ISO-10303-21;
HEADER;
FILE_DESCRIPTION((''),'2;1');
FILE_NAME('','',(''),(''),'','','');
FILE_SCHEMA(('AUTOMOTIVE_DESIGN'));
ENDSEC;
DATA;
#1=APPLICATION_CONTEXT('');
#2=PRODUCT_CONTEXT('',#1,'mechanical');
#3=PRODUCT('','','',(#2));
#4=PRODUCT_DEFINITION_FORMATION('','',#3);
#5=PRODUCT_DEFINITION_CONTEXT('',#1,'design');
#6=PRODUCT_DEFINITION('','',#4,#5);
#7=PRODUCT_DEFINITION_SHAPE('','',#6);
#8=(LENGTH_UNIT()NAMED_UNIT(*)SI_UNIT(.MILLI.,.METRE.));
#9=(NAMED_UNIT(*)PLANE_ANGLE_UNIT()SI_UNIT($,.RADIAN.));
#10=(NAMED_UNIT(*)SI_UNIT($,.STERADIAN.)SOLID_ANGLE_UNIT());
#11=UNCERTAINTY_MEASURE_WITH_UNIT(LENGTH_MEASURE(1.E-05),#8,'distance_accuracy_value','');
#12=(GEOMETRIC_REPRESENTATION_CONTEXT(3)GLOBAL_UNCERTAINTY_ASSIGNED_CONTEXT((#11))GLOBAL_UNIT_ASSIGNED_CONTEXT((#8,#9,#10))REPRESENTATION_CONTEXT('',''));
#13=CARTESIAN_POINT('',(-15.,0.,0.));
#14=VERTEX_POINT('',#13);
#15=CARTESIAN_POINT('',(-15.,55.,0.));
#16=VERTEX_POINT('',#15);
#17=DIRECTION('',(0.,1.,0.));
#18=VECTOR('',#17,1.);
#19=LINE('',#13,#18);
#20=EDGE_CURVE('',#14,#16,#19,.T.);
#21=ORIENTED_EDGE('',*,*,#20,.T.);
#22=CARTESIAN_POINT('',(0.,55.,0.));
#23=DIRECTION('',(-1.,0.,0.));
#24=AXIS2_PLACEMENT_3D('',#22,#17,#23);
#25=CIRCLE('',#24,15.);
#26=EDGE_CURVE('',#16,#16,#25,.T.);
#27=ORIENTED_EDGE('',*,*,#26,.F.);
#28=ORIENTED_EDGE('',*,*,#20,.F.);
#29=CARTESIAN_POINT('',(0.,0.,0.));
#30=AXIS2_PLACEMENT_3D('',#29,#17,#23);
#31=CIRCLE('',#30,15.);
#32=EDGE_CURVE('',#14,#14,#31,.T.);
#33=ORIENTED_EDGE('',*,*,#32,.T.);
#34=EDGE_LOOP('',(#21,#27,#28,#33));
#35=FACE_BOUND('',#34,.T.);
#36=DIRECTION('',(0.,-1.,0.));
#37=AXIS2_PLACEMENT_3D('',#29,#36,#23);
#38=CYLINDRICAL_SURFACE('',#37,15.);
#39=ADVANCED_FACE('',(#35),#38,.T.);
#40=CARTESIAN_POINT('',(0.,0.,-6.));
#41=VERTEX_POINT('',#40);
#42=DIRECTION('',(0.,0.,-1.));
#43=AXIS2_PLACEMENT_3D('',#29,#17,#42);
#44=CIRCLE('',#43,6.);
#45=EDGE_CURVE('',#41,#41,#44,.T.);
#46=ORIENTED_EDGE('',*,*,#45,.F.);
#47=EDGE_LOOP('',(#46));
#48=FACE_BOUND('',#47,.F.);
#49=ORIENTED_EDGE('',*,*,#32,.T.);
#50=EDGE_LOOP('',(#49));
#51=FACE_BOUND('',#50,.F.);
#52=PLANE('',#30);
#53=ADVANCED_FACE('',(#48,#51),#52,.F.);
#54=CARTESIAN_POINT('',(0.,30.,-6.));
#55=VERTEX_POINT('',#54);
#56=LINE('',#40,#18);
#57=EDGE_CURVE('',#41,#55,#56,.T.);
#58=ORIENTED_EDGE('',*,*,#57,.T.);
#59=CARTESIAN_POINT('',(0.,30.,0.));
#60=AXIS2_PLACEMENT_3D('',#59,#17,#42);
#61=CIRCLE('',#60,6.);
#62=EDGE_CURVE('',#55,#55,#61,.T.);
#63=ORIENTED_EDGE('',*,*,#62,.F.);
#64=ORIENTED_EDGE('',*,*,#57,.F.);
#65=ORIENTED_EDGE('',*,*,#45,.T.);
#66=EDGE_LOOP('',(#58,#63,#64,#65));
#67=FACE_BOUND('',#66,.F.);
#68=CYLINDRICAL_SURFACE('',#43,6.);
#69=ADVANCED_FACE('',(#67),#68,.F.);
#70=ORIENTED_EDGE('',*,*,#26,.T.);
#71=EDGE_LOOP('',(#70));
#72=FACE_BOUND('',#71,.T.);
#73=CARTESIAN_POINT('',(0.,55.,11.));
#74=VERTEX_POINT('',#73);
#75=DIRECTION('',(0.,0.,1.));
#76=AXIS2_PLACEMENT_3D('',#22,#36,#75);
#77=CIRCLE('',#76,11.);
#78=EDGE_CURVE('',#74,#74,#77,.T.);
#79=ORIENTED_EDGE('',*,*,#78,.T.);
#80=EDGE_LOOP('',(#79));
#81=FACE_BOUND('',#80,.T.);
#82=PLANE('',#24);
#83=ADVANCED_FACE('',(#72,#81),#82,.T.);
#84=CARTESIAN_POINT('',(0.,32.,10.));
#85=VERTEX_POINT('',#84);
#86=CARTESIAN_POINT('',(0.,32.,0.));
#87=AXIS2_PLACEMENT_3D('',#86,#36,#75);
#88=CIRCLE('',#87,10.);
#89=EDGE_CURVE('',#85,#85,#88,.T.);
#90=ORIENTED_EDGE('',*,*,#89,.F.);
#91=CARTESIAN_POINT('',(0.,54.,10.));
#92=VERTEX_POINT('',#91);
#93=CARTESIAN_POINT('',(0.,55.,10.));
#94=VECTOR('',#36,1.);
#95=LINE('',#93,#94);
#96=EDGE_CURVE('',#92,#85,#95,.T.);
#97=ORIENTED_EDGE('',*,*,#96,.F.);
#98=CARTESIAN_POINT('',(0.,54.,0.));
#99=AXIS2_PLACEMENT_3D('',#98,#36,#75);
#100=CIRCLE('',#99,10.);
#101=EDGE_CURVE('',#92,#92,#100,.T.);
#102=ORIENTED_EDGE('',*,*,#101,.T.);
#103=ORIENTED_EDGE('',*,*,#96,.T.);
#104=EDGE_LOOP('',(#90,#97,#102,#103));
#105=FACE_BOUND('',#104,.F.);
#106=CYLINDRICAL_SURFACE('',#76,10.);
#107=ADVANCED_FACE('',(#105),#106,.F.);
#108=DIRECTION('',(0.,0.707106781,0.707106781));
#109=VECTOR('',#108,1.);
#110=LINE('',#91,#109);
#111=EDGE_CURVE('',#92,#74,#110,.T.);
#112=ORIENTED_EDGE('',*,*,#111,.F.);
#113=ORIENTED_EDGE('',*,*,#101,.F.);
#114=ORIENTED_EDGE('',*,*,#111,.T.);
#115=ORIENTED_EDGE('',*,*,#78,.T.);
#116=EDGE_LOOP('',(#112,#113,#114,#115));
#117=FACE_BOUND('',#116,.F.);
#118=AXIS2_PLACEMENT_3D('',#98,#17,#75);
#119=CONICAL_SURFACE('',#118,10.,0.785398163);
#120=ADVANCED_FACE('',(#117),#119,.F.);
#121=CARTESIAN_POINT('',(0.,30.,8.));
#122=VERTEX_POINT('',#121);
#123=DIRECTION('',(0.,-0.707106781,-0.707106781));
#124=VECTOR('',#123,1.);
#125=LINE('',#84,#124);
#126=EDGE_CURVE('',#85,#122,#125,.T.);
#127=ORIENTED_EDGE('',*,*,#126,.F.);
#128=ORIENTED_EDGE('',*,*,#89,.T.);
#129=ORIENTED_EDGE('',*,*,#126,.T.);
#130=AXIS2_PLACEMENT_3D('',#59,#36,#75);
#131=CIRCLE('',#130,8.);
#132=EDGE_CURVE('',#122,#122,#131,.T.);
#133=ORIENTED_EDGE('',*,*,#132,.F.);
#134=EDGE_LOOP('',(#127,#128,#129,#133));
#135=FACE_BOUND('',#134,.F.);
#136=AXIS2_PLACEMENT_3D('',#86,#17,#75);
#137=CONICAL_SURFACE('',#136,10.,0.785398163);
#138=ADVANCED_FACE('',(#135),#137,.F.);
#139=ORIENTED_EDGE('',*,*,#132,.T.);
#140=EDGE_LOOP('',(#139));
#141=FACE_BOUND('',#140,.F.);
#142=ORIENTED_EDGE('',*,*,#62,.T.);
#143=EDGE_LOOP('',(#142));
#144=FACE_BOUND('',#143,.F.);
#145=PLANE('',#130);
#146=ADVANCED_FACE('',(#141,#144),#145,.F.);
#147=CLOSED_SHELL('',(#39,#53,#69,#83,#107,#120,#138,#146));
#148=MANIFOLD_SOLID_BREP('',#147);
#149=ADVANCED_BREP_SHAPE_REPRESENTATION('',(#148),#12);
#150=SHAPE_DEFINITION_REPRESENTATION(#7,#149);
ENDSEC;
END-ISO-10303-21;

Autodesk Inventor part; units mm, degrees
ref_plane "YZ Plane" through (0, 0, 0) normal (1, 0, 0) x (0, 1, 0)
ref_plane "XZ Plane" through (0, 0, 0) normal (0, 1, 0) x (-1, 0, 0)
ref_plane "XY Plane" through (0, 0, 0) normal (0, 0, 1) x (1, 0, 0)
sketch "Эскиз1" plane through (0, 0, 0) normal (0, 1, 0) x (-1, 0, 0)
  circle A0 centre (0, 0) radius 15
  dimension "d0" = 30
extrude "Выдавливание1" add sketch "Эскиз1" along normal blind 55
hole "Отверстие1" at (0, 55, 0) direction (0, -1, 0) diameter 20 depth 25
hole "Отверстие2" at (0, 0, 0) direction (0, 1, 0) diameter 12 depth 30
thread "Резьба1" size "M20x2.5" class "6H" standard "ANSI Metric M Profile" length 20
chamfer "Фаска1" distance 2 angle 45 1 edges at (0, 30, -10)
chamfer "Фаска2" distance 1 angle 45 1 edges at (0, 55, -10)
equation "\"Радиус_гибки\" = Толщина"
equation "\"Ширина_просечки\" = Толщина"
equation "\"Глубина_просечки\" = 0.5 * Толщина"
equation "\"Размер_просечки\" = 4 * Толщина"
equation "\"Мин_остаток\" = 2 * Толщина"
equation "\"Радиус_перехода\" = Радиус_гибки"
equation "\"Радиус_Якоби\" = Толщина"
equation "\"Размер_зазора\" = Толщина"
equation "\"Толщина\" = 3.048"
properties part number "778" material "Сталь, углеродистая"
